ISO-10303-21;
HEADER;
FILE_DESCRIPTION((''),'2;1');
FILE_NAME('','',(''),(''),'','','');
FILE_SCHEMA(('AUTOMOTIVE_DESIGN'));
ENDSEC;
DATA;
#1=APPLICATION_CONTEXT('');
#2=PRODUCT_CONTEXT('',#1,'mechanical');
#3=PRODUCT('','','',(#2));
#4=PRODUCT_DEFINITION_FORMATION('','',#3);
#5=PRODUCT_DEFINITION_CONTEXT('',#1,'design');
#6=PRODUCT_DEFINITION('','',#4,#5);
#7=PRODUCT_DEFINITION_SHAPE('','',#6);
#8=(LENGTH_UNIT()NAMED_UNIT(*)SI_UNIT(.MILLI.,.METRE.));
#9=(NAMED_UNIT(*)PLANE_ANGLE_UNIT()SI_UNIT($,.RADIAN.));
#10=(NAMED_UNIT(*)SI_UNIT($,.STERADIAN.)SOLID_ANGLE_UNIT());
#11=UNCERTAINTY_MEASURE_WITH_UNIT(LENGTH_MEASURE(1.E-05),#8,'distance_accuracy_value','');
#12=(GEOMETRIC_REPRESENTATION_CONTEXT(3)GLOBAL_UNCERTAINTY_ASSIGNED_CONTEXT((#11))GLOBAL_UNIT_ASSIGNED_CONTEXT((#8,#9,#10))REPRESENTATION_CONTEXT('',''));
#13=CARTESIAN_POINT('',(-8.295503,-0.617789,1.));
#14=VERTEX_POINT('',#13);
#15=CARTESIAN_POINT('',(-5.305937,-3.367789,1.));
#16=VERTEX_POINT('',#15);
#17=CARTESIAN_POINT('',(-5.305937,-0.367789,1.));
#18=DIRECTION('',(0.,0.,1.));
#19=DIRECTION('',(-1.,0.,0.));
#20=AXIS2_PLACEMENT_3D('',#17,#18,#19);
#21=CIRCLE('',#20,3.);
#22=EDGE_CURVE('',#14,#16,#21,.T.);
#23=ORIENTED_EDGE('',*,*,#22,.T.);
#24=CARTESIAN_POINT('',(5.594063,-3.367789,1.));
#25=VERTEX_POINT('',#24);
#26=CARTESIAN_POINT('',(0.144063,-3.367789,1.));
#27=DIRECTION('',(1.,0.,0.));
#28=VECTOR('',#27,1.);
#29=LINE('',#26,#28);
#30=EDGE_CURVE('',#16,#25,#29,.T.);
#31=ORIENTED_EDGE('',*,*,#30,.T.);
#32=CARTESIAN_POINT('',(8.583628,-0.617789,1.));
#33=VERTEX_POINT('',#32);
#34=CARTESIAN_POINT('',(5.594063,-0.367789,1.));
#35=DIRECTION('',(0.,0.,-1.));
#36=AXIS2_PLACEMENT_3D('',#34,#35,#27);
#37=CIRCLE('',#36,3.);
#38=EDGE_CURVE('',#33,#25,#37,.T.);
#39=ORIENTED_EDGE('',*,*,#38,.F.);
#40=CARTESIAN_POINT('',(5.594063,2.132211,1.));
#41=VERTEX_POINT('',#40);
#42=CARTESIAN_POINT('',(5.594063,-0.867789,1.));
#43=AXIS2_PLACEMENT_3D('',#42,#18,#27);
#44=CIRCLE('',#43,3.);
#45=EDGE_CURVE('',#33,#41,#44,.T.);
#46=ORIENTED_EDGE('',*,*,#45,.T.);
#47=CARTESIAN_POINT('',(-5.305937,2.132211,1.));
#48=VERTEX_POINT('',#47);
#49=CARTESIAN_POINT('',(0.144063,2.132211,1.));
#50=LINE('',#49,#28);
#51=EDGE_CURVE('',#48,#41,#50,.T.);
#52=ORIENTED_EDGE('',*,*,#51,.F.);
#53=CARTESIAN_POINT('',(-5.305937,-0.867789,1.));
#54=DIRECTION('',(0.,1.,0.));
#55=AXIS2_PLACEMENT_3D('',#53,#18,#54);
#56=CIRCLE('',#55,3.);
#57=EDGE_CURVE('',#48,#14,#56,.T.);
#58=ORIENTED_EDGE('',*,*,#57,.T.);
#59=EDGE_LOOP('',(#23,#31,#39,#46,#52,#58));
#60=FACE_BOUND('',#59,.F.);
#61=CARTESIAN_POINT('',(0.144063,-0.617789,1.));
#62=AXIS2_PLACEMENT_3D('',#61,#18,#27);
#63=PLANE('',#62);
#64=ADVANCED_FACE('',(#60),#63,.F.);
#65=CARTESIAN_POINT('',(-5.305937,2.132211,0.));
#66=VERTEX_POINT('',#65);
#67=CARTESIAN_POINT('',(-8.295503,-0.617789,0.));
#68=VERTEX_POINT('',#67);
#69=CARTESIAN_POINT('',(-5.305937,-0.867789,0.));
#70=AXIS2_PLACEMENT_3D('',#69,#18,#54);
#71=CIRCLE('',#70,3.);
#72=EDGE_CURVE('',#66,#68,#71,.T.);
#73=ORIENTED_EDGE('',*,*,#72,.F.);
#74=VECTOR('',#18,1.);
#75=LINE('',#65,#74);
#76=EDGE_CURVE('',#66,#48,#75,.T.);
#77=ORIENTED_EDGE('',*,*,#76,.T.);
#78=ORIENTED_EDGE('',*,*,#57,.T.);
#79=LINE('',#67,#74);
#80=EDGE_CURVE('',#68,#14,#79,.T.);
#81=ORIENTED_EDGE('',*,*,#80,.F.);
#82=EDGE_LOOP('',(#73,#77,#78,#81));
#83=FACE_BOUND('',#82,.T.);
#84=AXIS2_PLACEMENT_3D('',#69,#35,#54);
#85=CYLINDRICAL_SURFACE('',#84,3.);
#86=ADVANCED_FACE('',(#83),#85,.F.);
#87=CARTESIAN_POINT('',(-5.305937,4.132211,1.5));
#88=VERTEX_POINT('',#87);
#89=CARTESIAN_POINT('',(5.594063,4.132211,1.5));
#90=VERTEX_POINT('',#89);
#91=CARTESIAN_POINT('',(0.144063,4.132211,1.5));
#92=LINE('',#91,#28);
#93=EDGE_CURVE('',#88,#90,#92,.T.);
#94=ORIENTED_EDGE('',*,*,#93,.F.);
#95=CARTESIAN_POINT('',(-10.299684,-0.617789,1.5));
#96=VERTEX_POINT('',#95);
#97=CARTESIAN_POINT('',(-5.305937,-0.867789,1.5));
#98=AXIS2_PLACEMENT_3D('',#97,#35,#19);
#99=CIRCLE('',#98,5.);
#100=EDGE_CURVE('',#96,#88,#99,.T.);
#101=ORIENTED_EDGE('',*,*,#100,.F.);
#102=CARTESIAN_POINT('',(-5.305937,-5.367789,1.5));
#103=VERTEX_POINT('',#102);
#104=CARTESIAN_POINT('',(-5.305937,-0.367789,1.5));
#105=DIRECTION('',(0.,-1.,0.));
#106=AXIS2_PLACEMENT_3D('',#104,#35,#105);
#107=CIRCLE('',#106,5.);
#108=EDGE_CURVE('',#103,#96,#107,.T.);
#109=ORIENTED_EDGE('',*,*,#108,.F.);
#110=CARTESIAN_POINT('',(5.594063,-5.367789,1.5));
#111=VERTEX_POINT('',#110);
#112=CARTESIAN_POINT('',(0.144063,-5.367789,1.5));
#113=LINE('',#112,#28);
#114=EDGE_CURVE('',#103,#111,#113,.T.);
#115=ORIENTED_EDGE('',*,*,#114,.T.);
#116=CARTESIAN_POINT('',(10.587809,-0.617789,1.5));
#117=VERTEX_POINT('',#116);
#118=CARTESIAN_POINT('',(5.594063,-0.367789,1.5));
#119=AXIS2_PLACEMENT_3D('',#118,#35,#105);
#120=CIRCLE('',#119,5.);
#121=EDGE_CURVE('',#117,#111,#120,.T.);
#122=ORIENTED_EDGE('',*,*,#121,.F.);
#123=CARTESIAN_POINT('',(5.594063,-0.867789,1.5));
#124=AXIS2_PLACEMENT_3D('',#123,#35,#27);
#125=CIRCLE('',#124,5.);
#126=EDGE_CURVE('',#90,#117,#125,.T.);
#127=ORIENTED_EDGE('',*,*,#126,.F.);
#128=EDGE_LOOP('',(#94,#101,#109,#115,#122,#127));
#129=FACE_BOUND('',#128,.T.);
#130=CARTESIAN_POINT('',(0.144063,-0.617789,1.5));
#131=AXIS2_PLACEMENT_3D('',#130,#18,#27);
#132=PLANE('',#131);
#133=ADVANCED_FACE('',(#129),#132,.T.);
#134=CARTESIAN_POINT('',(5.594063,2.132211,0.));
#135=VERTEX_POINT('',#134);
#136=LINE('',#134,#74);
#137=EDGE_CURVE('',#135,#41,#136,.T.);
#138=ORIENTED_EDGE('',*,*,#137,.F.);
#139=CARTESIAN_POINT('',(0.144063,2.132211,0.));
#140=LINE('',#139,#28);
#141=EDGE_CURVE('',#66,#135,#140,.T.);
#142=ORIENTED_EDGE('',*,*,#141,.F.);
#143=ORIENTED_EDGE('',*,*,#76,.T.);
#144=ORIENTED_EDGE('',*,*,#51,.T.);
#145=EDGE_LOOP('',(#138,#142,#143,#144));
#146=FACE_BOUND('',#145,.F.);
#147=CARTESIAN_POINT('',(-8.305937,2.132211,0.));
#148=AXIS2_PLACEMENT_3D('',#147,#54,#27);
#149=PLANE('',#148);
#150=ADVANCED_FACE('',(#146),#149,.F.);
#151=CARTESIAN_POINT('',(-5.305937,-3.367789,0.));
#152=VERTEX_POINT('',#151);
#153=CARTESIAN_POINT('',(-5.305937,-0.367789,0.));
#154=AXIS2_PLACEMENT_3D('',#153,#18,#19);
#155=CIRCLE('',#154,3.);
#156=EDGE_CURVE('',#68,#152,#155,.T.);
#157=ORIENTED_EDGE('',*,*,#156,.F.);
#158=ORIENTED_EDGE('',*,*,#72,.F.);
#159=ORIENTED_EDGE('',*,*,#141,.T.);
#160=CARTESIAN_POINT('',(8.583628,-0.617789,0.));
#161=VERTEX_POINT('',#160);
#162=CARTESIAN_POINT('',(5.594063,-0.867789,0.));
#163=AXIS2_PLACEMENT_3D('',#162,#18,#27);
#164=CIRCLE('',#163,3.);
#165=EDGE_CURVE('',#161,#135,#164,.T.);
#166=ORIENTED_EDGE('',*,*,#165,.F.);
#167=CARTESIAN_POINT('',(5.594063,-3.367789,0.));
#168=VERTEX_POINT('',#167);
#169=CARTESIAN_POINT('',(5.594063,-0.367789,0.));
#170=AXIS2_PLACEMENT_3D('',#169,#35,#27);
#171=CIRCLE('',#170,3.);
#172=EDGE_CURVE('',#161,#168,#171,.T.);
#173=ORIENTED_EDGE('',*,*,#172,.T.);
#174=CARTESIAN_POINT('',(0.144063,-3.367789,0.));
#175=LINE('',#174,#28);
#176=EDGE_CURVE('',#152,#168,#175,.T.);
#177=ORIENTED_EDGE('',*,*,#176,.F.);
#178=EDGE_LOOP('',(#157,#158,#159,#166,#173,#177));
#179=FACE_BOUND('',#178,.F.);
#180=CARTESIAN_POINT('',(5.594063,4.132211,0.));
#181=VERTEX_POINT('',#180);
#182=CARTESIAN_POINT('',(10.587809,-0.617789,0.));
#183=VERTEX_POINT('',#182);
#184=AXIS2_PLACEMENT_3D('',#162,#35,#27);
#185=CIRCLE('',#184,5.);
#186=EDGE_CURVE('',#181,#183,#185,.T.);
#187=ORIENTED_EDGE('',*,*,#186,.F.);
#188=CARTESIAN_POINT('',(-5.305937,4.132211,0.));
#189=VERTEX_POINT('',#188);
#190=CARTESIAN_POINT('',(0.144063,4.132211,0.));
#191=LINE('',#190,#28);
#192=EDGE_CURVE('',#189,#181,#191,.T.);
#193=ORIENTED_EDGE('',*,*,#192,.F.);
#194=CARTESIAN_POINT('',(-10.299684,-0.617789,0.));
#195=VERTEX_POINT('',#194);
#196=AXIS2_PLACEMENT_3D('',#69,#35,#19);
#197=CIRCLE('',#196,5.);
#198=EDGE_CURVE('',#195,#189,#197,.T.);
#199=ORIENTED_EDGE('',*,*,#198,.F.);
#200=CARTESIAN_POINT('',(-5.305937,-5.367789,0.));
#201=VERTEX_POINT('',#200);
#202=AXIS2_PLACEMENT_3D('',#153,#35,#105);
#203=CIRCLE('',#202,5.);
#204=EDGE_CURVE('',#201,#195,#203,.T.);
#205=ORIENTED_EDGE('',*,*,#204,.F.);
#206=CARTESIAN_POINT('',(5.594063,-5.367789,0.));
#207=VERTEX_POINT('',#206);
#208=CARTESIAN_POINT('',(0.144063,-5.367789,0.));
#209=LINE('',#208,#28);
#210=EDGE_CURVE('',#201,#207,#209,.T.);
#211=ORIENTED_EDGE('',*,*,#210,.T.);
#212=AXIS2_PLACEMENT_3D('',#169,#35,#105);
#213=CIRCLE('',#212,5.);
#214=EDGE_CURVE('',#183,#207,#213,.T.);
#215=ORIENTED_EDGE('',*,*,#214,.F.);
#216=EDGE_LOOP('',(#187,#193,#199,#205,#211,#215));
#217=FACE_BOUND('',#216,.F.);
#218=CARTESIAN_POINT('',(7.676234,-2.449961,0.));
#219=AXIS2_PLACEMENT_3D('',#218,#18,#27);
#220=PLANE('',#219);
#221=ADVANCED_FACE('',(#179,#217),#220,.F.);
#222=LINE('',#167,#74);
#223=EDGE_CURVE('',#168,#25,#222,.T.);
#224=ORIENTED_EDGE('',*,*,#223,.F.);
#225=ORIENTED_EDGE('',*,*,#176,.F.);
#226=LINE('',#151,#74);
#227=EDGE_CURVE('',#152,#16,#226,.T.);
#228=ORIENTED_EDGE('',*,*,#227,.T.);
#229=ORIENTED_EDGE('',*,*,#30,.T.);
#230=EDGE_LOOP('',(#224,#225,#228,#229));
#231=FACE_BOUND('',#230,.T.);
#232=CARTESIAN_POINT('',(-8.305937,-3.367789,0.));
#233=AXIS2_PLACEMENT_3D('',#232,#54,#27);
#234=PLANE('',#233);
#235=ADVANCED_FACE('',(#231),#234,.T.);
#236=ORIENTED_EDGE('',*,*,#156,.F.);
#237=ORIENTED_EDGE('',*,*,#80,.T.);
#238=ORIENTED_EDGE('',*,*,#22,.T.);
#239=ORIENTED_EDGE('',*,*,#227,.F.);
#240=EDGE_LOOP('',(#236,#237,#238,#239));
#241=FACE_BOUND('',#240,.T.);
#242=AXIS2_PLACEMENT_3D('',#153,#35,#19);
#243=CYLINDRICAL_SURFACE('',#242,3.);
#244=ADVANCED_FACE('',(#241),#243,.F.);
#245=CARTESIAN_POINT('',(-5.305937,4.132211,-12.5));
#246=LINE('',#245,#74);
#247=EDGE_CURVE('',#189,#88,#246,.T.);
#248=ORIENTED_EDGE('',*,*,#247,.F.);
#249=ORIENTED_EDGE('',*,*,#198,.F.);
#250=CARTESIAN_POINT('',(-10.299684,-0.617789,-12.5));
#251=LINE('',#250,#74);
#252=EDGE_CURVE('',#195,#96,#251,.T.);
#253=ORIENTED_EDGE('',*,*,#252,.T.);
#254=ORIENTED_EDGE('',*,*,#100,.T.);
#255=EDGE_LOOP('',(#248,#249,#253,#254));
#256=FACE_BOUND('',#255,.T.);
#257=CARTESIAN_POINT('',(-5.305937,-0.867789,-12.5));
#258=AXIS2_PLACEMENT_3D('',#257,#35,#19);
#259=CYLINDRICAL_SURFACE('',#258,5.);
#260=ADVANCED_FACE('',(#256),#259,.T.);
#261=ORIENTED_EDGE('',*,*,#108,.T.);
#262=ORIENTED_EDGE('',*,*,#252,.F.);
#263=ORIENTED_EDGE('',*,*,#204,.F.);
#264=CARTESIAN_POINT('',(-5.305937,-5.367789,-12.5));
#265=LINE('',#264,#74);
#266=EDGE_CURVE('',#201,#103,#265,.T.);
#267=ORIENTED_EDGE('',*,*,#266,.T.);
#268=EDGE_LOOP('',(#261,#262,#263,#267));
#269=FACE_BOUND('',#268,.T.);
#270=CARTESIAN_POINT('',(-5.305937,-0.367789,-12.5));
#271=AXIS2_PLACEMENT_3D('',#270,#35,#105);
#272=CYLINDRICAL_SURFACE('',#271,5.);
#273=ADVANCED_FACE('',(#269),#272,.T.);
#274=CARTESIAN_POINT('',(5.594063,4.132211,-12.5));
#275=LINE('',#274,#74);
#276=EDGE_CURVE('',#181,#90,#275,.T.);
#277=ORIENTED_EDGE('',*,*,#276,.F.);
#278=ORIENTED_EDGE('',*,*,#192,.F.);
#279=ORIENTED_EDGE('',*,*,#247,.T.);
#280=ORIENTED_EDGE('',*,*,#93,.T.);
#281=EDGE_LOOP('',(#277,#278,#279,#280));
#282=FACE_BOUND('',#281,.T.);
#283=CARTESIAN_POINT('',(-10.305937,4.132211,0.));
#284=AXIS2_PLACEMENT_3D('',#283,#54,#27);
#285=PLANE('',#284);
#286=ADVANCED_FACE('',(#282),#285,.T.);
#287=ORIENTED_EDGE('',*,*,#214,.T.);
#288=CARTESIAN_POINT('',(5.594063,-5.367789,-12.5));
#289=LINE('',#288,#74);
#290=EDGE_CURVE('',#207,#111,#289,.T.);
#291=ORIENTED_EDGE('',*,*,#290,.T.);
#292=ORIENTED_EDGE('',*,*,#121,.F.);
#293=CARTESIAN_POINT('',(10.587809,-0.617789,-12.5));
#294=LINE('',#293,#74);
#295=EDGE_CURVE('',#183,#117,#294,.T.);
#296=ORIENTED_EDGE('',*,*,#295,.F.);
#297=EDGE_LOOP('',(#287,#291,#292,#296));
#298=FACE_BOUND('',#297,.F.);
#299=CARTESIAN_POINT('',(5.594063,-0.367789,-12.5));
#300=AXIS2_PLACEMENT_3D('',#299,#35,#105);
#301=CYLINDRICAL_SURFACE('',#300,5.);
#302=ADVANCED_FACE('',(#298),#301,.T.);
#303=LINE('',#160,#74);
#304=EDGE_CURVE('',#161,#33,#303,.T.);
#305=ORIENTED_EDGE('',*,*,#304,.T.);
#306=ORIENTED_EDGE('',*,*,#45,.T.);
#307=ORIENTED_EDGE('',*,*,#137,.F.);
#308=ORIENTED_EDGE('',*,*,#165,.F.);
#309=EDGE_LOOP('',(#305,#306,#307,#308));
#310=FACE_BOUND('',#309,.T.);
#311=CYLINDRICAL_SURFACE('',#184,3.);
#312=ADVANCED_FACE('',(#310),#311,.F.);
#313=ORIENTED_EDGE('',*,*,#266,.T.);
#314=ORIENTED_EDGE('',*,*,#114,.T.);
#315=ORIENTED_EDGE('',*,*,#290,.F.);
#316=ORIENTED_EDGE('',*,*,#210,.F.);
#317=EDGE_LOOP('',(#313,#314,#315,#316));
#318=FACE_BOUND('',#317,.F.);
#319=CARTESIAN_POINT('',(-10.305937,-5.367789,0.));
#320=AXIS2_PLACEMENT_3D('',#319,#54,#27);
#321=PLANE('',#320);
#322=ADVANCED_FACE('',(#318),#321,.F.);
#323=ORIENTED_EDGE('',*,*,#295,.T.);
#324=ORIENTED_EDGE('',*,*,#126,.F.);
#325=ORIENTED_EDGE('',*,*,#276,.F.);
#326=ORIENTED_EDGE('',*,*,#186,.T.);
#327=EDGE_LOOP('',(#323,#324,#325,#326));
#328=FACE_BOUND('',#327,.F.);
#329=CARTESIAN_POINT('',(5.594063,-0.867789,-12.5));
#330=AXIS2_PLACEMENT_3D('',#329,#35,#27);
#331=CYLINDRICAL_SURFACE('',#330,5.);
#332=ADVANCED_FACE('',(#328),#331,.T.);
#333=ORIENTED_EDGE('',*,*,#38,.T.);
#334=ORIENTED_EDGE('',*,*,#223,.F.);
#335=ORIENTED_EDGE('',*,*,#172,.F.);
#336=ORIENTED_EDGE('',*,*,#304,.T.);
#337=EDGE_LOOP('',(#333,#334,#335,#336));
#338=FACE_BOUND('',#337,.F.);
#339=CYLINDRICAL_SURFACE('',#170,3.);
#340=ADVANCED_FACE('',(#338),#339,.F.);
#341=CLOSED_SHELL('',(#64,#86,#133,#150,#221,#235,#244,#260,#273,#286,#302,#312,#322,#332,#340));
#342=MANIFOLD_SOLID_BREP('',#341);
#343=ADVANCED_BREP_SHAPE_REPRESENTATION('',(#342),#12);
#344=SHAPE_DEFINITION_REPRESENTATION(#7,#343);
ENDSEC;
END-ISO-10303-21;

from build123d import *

# Parameters (mm, degrees)
F0_W        = 20.9
F0_H        = 9.5
F1_DEPTH    = 1.5
F2_W        = 16.9
F2_H        = 5.5
F3_DEPTH    = 1
F4_T1_DEPTH = 1
F5_T1_DEPTH = 26.5


# Not quite as in the source:
# - a fillet or chamfer that OpenCascade refuses, or shapes differently, is made with other operations: its cross-section is extruded or revolved along the edge and cut away or added


with BuildPart() as f1:
    # F0 (on Top) → F1 (new body)
    with BuildSketch(Plane.XY):
        with Locations((0.1440625638, -0.617788887)):
            Rectangle(F0_W, F0_H)
    extrude(amount=F1_DEPTH)

    # F2 (on Top) → F3 (cut)
    with BuildSketch(Plane.XY):
        with Locations((0.1440625638, -0.617788887)):
            Rectangle(F2_W, F2_H)
    extrude(amount=F3_DEPTH, mode=Mode.SUBTRACT)

    # F4: fillet of radius 3 on 4 edges, made by hand

    # F4_s2 → F4_t1 (join)
    with BuildSketch(Plane.XY):
        with BuildLine():
            ThreePointArc((8.5940625638, -0.367788887), (7.7153829073, -2.4891092305), (5.5940625638, -3.367788887))
            Line((5.5940625638, -3.367788887), (8.5940625638, -3.367788887))
            Line((8.5940625638, -3.367788887), (8.5940625638, -0.367788887))
        make_face()
        with BuildLine():
            ThreePointArc((-5.3059374362, 2.132211113), (-7.4272577798, 1.2535314566), (-8.3059374362, -0.867788887))
            Line((-8.3059374362, -0.867788887), (-8.3059374362, 2.132211113))
            Line((-8.3059374362, 2.132211113), (-5.3059374362, 2.132211113))
        make_face()
        with BuildLine():
            ThreePointArc((8.5940625638, -0.867788887), (7.7153829073, 1.2535314566), (5.5940625638, 2.132211113))
            Line((5.5940625638, 2.132211113), (8.5940625638, 2.132211113))
            Line((8.5940625638, 2.132211113), (8.5940625638, -0.867788887))
        make_face()
        with BuildLine():
            ThreePointArc((-8.3059374362, -0.367788887), (-7.4272577798, -2.4891092305), (-5.3059374362, -3.367788887))
            Line((-5.3059374362, -3.367788887), (-8.3059374362, -3.367788887))
            Line((-8.3059374362, -3.367788887), (-8.3059374362, -0.367788887))
        make_face()
    extrude(amount=F4_T1_DEPTH)

    # F5: fillet of radius 5 on 4 edges, made by hand

    # F5_s2 → F5_t1 (cut)
    with BuildSketch(Plane.XY.offset(-12.5)):
        with BuildLine():
            ThreePointArc((-10.3059374362, -0.867788887), (-8.8414713422, 2.667745019), (-5.3059374362, 4.132211113))
            Line((-5.3059374362, 4.132211113), (-10.3059374362, 4.132211113))
            Line((-10.3059374362, 4.132211113), (-10.3059374362, -0.867788887))
        make_face()
        with BuildLine():
            ThreePointArc((-5.3059374362, -5.367788887), (-8.8414713422, -3.9033227929), (-10.3059374362, -0.367788887))
            Line((-10.3059374362, -0.367788887), (-10.3059374362, -5.367788887))
            Line((-10.3059374362, -5.367788887), (-5.3059374362, -5.367788887))
        make_face()
        with BuildLine():
            ThreePointArc((10.5940625638, -0.867788887), (9.1295964697, 2.667745019), (5.5940625638, 4.132211113))
            Line((5.5940625638, 4.132211113), (10.5940625638, 4.132211113))
            Line((10.5940625638, 4.132211113), (10.5940625638, -0.867788887))
        make_face()
        with BuildLine():
            ThreePointArc((5.5940625638, -5.367788887), (9.1295964697, -3.9033227929), (10.5940625638, -0.367788887))
            Line((10.5940625638, -0.367788887), (10.5940625638, -5.367788887))
            Line((10.5940625638, -5.367788887), (5.5940625638, -5.367788887))
        make_face()
    extrude(amount=F5_T1_DEPTH, mode=Mode.SUBTRACT)


solid = f1.part
